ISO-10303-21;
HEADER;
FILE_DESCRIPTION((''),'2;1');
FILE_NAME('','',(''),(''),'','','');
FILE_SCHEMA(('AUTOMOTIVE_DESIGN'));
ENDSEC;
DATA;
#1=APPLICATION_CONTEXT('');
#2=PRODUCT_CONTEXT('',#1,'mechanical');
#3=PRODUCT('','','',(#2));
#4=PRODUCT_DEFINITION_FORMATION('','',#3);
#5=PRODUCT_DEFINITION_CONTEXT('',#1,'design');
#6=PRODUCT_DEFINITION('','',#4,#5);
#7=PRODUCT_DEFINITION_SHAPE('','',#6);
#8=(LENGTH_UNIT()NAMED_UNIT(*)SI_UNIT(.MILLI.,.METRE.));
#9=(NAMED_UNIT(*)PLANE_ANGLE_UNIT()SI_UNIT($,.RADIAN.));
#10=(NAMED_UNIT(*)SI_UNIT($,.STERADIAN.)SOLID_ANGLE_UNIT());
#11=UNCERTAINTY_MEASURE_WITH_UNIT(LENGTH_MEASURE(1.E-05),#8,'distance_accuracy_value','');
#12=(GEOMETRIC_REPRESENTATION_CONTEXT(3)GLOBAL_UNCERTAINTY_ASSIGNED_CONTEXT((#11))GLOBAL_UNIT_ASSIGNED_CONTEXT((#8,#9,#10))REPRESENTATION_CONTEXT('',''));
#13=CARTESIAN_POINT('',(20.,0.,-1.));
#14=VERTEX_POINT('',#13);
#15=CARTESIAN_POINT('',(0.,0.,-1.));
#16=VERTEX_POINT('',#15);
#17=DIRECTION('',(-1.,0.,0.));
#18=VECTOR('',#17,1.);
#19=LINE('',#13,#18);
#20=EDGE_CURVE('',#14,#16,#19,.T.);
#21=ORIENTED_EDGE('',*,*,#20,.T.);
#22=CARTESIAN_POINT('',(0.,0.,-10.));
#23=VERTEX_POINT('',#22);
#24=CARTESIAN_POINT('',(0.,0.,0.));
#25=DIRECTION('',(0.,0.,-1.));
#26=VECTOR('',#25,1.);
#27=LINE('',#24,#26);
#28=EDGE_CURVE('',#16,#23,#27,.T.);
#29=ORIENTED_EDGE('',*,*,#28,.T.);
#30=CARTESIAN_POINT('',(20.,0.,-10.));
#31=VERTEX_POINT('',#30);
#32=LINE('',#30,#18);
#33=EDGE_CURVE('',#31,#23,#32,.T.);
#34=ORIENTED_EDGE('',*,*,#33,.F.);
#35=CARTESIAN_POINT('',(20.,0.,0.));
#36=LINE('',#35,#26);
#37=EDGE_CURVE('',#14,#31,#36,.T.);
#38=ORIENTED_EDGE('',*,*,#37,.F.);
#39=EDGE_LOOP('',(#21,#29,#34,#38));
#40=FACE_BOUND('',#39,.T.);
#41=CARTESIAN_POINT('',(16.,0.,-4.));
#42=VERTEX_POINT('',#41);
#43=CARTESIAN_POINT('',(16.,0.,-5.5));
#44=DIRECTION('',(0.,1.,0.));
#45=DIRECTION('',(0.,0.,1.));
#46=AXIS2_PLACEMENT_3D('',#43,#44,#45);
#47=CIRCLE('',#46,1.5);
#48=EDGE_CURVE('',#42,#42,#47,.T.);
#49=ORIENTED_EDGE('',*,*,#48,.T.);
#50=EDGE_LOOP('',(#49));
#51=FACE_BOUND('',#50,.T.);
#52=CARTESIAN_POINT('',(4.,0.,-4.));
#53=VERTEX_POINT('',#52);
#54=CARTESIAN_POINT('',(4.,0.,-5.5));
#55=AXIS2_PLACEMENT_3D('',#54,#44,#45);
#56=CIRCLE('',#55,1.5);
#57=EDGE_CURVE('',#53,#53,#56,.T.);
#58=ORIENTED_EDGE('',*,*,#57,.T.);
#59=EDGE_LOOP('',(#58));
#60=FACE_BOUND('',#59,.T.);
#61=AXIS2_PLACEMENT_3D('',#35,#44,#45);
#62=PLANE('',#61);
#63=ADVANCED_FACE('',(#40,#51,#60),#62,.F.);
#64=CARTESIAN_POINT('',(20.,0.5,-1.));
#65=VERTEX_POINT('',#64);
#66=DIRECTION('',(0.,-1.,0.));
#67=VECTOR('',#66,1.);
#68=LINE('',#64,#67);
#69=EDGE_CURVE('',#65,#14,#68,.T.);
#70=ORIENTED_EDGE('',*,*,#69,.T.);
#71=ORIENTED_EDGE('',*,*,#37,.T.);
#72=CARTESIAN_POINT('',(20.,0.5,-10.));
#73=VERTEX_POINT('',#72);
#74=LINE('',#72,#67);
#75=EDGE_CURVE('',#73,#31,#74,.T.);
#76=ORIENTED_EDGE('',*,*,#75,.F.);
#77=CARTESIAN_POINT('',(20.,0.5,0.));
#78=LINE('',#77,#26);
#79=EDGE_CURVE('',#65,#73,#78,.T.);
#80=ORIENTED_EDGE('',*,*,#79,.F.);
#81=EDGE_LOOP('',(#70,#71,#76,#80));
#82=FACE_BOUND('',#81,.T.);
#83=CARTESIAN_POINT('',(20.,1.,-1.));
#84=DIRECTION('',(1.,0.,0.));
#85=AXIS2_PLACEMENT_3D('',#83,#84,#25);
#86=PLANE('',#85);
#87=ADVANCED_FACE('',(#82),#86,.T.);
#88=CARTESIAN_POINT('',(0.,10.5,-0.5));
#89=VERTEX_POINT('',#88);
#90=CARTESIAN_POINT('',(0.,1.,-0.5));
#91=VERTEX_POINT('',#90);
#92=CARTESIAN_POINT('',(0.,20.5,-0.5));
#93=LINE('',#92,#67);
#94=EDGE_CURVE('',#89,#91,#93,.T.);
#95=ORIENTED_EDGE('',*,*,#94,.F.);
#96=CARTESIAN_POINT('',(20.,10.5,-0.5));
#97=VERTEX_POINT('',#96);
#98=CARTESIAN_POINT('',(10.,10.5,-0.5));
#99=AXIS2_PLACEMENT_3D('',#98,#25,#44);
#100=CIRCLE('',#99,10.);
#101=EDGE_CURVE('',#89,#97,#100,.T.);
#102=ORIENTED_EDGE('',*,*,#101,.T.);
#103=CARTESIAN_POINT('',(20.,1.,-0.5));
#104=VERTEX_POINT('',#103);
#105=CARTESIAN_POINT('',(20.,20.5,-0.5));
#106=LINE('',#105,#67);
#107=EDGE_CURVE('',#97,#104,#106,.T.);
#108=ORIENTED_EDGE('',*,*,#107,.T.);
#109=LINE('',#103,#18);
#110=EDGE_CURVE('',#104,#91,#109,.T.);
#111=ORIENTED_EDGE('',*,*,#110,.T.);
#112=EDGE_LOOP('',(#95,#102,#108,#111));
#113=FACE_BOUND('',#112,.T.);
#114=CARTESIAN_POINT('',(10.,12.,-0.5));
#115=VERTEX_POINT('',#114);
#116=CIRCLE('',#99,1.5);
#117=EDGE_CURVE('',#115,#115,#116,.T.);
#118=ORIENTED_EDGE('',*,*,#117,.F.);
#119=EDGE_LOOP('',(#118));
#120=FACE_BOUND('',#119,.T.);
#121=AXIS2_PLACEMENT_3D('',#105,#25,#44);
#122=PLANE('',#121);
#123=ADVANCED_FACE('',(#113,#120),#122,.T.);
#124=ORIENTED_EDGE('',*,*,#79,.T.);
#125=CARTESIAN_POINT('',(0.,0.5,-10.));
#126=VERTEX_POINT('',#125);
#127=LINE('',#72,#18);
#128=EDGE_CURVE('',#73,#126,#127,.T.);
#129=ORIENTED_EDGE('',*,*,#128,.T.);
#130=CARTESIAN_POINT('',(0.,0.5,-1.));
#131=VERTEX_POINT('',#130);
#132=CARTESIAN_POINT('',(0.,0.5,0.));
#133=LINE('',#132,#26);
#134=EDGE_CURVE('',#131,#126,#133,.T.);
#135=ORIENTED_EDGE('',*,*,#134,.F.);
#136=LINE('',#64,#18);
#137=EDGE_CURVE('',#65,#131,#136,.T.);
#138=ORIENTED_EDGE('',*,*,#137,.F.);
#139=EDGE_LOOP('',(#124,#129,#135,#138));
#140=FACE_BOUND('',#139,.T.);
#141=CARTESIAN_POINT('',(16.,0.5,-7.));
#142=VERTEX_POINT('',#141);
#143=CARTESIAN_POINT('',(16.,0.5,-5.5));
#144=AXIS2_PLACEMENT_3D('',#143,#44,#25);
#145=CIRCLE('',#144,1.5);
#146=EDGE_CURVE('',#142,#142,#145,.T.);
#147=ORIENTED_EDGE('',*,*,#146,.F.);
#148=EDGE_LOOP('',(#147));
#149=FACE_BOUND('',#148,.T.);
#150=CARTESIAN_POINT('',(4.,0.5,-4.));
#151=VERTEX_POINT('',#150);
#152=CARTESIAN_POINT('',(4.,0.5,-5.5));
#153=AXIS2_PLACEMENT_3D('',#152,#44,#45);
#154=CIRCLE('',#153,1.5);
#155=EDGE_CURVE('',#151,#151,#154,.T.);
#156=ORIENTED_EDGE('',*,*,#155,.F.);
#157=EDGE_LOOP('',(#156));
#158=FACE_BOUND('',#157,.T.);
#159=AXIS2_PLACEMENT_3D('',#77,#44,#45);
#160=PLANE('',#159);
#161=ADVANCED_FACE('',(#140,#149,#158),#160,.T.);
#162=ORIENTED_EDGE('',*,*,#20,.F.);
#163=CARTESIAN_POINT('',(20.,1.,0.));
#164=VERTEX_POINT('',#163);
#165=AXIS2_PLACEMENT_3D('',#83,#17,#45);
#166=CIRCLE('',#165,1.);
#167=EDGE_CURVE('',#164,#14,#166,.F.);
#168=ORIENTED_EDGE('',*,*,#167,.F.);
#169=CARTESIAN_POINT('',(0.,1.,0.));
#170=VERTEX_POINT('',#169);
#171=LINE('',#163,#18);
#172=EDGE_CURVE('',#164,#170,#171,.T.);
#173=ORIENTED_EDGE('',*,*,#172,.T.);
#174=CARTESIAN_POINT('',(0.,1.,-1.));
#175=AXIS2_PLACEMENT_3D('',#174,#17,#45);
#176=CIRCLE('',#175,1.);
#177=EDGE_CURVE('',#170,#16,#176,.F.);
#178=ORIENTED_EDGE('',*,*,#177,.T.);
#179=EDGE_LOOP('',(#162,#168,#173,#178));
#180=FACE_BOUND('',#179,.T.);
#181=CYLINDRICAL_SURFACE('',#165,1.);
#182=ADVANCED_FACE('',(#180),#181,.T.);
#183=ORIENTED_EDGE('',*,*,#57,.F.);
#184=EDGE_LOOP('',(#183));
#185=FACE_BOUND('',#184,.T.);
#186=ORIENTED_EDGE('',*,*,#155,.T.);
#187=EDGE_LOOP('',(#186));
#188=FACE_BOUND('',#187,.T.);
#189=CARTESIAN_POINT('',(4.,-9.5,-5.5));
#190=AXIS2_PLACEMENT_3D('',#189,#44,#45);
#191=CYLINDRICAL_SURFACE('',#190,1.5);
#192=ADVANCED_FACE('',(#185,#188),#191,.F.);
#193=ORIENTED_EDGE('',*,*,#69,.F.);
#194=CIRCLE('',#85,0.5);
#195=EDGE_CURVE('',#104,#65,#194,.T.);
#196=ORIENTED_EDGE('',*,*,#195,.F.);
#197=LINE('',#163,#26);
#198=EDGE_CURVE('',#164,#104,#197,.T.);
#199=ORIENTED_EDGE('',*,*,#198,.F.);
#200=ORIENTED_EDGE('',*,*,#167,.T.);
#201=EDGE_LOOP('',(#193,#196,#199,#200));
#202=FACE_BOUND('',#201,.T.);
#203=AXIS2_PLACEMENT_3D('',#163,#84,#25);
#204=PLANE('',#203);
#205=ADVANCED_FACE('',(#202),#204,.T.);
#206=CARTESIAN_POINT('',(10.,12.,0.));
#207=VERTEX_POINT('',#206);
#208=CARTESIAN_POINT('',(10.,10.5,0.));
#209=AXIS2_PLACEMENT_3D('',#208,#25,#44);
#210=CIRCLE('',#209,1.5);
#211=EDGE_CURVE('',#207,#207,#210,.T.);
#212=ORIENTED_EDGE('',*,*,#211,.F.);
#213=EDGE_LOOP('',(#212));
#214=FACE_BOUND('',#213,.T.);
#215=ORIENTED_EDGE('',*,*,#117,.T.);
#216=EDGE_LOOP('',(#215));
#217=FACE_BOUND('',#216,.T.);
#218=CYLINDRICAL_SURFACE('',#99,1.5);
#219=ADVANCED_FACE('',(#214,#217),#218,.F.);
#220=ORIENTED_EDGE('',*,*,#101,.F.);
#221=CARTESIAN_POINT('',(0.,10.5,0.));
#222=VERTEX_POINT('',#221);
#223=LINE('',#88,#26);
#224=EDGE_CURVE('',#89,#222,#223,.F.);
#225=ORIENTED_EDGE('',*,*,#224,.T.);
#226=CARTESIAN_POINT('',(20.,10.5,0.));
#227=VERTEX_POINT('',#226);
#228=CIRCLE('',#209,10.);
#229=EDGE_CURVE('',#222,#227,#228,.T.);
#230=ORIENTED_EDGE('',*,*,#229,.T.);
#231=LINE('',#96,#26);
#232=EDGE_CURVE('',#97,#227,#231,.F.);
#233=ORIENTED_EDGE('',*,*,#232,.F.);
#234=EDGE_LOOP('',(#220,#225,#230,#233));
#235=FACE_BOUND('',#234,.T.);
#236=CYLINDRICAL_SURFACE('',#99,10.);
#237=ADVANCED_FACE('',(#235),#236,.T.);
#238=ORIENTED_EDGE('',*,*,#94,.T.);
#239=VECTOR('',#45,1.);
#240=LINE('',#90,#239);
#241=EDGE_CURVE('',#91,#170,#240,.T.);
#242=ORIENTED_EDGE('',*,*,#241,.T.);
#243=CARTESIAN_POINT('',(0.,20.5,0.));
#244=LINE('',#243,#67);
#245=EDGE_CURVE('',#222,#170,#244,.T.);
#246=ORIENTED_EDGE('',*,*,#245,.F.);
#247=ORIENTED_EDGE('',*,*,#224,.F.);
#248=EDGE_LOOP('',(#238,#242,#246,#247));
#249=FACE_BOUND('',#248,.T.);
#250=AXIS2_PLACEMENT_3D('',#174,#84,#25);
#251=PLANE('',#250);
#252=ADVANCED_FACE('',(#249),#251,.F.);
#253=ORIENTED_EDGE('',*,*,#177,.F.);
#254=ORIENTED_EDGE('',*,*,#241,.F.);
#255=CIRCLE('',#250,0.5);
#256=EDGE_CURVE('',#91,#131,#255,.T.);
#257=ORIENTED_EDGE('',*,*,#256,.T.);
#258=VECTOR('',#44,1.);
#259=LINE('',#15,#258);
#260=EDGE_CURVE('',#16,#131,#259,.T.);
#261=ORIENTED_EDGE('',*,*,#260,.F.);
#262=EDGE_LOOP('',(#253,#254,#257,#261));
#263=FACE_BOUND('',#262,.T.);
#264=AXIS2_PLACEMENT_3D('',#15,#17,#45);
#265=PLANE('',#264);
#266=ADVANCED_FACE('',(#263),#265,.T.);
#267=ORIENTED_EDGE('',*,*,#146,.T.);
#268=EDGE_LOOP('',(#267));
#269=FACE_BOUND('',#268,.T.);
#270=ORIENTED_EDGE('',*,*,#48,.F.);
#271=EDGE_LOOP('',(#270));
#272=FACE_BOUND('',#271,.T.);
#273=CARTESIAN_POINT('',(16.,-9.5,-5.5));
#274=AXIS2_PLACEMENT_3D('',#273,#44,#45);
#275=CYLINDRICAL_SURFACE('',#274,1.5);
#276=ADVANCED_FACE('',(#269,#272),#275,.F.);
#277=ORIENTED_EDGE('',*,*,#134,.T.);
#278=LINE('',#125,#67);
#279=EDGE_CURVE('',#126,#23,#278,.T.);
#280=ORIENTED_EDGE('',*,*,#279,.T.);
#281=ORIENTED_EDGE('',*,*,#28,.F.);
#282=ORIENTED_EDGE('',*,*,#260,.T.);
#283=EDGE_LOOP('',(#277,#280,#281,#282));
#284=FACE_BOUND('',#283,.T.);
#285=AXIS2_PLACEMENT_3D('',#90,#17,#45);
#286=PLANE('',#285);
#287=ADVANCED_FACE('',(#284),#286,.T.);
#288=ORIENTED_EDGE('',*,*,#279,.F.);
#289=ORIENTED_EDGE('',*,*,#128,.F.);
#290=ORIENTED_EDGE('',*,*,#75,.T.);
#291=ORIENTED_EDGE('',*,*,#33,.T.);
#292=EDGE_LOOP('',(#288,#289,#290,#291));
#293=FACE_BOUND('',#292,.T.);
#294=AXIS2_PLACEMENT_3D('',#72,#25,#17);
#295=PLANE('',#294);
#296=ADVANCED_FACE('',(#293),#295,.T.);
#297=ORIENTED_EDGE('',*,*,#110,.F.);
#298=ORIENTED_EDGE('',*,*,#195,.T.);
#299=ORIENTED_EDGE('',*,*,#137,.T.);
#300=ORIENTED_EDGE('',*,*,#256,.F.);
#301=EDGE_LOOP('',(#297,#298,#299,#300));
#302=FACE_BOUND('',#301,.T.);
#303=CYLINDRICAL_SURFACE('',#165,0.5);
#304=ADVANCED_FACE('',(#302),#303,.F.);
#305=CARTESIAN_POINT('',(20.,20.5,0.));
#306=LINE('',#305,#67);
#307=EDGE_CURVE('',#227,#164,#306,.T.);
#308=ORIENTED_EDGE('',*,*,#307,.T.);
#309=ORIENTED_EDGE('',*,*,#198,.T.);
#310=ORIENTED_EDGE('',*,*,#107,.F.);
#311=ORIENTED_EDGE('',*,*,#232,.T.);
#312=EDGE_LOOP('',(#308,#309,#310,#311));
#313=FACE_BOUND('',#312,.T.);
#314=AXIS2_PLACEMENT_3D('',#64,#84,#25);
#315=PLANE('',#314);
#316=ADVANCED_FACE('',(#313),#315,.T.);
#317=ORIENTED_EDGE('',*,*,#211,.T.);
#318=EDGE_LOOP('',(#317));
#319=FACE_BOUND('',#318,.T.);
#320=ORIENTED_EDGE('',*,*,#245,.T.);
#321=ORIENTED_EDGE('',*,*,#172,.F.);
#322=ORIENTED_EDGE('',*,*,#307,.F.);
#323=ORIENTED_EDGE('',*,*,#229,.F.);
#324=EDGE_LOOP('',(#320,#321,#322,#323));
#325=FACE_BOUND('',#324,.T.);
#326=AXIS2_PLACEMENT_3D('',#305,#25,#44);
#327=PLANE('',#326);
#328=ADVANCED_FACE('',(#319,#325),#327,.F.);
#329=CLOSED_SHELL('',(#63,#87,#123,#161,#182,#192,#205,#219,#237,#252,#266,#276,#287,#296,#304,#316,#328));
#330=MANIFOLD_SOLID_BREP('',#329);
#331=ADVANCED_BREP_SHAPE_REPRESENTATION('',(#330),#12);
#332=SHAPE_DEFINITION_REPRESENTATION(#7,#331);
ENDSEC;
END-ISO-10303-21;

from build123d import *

# Parameters (mm, degrees)
BRIDA_BASE1_DEPTH     = 20
CROQUIS5_R            = 1.5
CORTAR_EXTRUIR1_DEPTH = 10
CROQUIS6_R            = 1.5
CORTAR_EXTRUIR2_DEPTH = 10


# Sheet-metal steps are written as plain solids
with BuildPart() as part:
    # Croquis1 → Brida base1 (new body)
    with BuildSketch(Plane(origin=(0, 0, 0), x_dir=(0, 0, -1), z_dir=(1, 0, 0))):
        with BuildLine():
            Line((0, 20.5), (0, 1))
            ThreePointArc((0, 1), (0.292893219, 0.292893219), (1, 0))
            Line((1, 0), (10, 0))
            Line((10, 0), (10, 0.5))
            Line((10, 0.5), (1, 0.5))
            ThreePointArc((1, 0.5), (0.646446609, 0.646446609), (0.5, 1))
            Line((0.5, 1), (0.5, 20.5))
            Line((0.5, 20.5), (0, 20.5))
        make_face()
    extrude(amount=BRIDA_BASE1_DEPTH)

    # Croquis5 → Cortar-Extruir1 (cut)
    with BuildSketch(Plane(origin=(0, 0.5, 0), x_dir=(1, 0, 0), z_dir=(0, 1, 0))):
        with Locations(Location((4, 5.5, 0), (0, 0, 270))):
            Circle(CROQUIS5_R)
        with Locations(Location((16, 5.5, 0), (0, 0, 270))):
            Circle(CROQUIS5_R)
    extrude(amount=-CORTAR_EXTRUIR1_DEPTH, mode=Mode.SUBTRACT)

    # Croquis6 → Cortar-Extruir2 (cut)
    with BuildSketch(Plane.XY):
        with BuildLine():
            ThreePointArc((0, 10.5), (2.928932188, 17.571067812), (10, 20.5))
            Line((10, 20.5), (0, 20.5))
            Line((0, 20.5), (0, 10.5))
        make_face()
        with BuildLine():
            ThreePointArc((10, 20.5), (17.071067812, 17.571067812), (20, 10.5))
            Line((20, 10.5), (20, 20.5))
            Line((20, 20.5), (10, 20.5))
        make_face()
        with Locations(Location((10, 10.5, 0), (0, 0, 90))):
            Circle(CROQUIS6_R)
    extrude(amount=-CORTAR_EXTRUIR2_DEPTH, mode=Mode.SUBTRACT)


solid = part.part
